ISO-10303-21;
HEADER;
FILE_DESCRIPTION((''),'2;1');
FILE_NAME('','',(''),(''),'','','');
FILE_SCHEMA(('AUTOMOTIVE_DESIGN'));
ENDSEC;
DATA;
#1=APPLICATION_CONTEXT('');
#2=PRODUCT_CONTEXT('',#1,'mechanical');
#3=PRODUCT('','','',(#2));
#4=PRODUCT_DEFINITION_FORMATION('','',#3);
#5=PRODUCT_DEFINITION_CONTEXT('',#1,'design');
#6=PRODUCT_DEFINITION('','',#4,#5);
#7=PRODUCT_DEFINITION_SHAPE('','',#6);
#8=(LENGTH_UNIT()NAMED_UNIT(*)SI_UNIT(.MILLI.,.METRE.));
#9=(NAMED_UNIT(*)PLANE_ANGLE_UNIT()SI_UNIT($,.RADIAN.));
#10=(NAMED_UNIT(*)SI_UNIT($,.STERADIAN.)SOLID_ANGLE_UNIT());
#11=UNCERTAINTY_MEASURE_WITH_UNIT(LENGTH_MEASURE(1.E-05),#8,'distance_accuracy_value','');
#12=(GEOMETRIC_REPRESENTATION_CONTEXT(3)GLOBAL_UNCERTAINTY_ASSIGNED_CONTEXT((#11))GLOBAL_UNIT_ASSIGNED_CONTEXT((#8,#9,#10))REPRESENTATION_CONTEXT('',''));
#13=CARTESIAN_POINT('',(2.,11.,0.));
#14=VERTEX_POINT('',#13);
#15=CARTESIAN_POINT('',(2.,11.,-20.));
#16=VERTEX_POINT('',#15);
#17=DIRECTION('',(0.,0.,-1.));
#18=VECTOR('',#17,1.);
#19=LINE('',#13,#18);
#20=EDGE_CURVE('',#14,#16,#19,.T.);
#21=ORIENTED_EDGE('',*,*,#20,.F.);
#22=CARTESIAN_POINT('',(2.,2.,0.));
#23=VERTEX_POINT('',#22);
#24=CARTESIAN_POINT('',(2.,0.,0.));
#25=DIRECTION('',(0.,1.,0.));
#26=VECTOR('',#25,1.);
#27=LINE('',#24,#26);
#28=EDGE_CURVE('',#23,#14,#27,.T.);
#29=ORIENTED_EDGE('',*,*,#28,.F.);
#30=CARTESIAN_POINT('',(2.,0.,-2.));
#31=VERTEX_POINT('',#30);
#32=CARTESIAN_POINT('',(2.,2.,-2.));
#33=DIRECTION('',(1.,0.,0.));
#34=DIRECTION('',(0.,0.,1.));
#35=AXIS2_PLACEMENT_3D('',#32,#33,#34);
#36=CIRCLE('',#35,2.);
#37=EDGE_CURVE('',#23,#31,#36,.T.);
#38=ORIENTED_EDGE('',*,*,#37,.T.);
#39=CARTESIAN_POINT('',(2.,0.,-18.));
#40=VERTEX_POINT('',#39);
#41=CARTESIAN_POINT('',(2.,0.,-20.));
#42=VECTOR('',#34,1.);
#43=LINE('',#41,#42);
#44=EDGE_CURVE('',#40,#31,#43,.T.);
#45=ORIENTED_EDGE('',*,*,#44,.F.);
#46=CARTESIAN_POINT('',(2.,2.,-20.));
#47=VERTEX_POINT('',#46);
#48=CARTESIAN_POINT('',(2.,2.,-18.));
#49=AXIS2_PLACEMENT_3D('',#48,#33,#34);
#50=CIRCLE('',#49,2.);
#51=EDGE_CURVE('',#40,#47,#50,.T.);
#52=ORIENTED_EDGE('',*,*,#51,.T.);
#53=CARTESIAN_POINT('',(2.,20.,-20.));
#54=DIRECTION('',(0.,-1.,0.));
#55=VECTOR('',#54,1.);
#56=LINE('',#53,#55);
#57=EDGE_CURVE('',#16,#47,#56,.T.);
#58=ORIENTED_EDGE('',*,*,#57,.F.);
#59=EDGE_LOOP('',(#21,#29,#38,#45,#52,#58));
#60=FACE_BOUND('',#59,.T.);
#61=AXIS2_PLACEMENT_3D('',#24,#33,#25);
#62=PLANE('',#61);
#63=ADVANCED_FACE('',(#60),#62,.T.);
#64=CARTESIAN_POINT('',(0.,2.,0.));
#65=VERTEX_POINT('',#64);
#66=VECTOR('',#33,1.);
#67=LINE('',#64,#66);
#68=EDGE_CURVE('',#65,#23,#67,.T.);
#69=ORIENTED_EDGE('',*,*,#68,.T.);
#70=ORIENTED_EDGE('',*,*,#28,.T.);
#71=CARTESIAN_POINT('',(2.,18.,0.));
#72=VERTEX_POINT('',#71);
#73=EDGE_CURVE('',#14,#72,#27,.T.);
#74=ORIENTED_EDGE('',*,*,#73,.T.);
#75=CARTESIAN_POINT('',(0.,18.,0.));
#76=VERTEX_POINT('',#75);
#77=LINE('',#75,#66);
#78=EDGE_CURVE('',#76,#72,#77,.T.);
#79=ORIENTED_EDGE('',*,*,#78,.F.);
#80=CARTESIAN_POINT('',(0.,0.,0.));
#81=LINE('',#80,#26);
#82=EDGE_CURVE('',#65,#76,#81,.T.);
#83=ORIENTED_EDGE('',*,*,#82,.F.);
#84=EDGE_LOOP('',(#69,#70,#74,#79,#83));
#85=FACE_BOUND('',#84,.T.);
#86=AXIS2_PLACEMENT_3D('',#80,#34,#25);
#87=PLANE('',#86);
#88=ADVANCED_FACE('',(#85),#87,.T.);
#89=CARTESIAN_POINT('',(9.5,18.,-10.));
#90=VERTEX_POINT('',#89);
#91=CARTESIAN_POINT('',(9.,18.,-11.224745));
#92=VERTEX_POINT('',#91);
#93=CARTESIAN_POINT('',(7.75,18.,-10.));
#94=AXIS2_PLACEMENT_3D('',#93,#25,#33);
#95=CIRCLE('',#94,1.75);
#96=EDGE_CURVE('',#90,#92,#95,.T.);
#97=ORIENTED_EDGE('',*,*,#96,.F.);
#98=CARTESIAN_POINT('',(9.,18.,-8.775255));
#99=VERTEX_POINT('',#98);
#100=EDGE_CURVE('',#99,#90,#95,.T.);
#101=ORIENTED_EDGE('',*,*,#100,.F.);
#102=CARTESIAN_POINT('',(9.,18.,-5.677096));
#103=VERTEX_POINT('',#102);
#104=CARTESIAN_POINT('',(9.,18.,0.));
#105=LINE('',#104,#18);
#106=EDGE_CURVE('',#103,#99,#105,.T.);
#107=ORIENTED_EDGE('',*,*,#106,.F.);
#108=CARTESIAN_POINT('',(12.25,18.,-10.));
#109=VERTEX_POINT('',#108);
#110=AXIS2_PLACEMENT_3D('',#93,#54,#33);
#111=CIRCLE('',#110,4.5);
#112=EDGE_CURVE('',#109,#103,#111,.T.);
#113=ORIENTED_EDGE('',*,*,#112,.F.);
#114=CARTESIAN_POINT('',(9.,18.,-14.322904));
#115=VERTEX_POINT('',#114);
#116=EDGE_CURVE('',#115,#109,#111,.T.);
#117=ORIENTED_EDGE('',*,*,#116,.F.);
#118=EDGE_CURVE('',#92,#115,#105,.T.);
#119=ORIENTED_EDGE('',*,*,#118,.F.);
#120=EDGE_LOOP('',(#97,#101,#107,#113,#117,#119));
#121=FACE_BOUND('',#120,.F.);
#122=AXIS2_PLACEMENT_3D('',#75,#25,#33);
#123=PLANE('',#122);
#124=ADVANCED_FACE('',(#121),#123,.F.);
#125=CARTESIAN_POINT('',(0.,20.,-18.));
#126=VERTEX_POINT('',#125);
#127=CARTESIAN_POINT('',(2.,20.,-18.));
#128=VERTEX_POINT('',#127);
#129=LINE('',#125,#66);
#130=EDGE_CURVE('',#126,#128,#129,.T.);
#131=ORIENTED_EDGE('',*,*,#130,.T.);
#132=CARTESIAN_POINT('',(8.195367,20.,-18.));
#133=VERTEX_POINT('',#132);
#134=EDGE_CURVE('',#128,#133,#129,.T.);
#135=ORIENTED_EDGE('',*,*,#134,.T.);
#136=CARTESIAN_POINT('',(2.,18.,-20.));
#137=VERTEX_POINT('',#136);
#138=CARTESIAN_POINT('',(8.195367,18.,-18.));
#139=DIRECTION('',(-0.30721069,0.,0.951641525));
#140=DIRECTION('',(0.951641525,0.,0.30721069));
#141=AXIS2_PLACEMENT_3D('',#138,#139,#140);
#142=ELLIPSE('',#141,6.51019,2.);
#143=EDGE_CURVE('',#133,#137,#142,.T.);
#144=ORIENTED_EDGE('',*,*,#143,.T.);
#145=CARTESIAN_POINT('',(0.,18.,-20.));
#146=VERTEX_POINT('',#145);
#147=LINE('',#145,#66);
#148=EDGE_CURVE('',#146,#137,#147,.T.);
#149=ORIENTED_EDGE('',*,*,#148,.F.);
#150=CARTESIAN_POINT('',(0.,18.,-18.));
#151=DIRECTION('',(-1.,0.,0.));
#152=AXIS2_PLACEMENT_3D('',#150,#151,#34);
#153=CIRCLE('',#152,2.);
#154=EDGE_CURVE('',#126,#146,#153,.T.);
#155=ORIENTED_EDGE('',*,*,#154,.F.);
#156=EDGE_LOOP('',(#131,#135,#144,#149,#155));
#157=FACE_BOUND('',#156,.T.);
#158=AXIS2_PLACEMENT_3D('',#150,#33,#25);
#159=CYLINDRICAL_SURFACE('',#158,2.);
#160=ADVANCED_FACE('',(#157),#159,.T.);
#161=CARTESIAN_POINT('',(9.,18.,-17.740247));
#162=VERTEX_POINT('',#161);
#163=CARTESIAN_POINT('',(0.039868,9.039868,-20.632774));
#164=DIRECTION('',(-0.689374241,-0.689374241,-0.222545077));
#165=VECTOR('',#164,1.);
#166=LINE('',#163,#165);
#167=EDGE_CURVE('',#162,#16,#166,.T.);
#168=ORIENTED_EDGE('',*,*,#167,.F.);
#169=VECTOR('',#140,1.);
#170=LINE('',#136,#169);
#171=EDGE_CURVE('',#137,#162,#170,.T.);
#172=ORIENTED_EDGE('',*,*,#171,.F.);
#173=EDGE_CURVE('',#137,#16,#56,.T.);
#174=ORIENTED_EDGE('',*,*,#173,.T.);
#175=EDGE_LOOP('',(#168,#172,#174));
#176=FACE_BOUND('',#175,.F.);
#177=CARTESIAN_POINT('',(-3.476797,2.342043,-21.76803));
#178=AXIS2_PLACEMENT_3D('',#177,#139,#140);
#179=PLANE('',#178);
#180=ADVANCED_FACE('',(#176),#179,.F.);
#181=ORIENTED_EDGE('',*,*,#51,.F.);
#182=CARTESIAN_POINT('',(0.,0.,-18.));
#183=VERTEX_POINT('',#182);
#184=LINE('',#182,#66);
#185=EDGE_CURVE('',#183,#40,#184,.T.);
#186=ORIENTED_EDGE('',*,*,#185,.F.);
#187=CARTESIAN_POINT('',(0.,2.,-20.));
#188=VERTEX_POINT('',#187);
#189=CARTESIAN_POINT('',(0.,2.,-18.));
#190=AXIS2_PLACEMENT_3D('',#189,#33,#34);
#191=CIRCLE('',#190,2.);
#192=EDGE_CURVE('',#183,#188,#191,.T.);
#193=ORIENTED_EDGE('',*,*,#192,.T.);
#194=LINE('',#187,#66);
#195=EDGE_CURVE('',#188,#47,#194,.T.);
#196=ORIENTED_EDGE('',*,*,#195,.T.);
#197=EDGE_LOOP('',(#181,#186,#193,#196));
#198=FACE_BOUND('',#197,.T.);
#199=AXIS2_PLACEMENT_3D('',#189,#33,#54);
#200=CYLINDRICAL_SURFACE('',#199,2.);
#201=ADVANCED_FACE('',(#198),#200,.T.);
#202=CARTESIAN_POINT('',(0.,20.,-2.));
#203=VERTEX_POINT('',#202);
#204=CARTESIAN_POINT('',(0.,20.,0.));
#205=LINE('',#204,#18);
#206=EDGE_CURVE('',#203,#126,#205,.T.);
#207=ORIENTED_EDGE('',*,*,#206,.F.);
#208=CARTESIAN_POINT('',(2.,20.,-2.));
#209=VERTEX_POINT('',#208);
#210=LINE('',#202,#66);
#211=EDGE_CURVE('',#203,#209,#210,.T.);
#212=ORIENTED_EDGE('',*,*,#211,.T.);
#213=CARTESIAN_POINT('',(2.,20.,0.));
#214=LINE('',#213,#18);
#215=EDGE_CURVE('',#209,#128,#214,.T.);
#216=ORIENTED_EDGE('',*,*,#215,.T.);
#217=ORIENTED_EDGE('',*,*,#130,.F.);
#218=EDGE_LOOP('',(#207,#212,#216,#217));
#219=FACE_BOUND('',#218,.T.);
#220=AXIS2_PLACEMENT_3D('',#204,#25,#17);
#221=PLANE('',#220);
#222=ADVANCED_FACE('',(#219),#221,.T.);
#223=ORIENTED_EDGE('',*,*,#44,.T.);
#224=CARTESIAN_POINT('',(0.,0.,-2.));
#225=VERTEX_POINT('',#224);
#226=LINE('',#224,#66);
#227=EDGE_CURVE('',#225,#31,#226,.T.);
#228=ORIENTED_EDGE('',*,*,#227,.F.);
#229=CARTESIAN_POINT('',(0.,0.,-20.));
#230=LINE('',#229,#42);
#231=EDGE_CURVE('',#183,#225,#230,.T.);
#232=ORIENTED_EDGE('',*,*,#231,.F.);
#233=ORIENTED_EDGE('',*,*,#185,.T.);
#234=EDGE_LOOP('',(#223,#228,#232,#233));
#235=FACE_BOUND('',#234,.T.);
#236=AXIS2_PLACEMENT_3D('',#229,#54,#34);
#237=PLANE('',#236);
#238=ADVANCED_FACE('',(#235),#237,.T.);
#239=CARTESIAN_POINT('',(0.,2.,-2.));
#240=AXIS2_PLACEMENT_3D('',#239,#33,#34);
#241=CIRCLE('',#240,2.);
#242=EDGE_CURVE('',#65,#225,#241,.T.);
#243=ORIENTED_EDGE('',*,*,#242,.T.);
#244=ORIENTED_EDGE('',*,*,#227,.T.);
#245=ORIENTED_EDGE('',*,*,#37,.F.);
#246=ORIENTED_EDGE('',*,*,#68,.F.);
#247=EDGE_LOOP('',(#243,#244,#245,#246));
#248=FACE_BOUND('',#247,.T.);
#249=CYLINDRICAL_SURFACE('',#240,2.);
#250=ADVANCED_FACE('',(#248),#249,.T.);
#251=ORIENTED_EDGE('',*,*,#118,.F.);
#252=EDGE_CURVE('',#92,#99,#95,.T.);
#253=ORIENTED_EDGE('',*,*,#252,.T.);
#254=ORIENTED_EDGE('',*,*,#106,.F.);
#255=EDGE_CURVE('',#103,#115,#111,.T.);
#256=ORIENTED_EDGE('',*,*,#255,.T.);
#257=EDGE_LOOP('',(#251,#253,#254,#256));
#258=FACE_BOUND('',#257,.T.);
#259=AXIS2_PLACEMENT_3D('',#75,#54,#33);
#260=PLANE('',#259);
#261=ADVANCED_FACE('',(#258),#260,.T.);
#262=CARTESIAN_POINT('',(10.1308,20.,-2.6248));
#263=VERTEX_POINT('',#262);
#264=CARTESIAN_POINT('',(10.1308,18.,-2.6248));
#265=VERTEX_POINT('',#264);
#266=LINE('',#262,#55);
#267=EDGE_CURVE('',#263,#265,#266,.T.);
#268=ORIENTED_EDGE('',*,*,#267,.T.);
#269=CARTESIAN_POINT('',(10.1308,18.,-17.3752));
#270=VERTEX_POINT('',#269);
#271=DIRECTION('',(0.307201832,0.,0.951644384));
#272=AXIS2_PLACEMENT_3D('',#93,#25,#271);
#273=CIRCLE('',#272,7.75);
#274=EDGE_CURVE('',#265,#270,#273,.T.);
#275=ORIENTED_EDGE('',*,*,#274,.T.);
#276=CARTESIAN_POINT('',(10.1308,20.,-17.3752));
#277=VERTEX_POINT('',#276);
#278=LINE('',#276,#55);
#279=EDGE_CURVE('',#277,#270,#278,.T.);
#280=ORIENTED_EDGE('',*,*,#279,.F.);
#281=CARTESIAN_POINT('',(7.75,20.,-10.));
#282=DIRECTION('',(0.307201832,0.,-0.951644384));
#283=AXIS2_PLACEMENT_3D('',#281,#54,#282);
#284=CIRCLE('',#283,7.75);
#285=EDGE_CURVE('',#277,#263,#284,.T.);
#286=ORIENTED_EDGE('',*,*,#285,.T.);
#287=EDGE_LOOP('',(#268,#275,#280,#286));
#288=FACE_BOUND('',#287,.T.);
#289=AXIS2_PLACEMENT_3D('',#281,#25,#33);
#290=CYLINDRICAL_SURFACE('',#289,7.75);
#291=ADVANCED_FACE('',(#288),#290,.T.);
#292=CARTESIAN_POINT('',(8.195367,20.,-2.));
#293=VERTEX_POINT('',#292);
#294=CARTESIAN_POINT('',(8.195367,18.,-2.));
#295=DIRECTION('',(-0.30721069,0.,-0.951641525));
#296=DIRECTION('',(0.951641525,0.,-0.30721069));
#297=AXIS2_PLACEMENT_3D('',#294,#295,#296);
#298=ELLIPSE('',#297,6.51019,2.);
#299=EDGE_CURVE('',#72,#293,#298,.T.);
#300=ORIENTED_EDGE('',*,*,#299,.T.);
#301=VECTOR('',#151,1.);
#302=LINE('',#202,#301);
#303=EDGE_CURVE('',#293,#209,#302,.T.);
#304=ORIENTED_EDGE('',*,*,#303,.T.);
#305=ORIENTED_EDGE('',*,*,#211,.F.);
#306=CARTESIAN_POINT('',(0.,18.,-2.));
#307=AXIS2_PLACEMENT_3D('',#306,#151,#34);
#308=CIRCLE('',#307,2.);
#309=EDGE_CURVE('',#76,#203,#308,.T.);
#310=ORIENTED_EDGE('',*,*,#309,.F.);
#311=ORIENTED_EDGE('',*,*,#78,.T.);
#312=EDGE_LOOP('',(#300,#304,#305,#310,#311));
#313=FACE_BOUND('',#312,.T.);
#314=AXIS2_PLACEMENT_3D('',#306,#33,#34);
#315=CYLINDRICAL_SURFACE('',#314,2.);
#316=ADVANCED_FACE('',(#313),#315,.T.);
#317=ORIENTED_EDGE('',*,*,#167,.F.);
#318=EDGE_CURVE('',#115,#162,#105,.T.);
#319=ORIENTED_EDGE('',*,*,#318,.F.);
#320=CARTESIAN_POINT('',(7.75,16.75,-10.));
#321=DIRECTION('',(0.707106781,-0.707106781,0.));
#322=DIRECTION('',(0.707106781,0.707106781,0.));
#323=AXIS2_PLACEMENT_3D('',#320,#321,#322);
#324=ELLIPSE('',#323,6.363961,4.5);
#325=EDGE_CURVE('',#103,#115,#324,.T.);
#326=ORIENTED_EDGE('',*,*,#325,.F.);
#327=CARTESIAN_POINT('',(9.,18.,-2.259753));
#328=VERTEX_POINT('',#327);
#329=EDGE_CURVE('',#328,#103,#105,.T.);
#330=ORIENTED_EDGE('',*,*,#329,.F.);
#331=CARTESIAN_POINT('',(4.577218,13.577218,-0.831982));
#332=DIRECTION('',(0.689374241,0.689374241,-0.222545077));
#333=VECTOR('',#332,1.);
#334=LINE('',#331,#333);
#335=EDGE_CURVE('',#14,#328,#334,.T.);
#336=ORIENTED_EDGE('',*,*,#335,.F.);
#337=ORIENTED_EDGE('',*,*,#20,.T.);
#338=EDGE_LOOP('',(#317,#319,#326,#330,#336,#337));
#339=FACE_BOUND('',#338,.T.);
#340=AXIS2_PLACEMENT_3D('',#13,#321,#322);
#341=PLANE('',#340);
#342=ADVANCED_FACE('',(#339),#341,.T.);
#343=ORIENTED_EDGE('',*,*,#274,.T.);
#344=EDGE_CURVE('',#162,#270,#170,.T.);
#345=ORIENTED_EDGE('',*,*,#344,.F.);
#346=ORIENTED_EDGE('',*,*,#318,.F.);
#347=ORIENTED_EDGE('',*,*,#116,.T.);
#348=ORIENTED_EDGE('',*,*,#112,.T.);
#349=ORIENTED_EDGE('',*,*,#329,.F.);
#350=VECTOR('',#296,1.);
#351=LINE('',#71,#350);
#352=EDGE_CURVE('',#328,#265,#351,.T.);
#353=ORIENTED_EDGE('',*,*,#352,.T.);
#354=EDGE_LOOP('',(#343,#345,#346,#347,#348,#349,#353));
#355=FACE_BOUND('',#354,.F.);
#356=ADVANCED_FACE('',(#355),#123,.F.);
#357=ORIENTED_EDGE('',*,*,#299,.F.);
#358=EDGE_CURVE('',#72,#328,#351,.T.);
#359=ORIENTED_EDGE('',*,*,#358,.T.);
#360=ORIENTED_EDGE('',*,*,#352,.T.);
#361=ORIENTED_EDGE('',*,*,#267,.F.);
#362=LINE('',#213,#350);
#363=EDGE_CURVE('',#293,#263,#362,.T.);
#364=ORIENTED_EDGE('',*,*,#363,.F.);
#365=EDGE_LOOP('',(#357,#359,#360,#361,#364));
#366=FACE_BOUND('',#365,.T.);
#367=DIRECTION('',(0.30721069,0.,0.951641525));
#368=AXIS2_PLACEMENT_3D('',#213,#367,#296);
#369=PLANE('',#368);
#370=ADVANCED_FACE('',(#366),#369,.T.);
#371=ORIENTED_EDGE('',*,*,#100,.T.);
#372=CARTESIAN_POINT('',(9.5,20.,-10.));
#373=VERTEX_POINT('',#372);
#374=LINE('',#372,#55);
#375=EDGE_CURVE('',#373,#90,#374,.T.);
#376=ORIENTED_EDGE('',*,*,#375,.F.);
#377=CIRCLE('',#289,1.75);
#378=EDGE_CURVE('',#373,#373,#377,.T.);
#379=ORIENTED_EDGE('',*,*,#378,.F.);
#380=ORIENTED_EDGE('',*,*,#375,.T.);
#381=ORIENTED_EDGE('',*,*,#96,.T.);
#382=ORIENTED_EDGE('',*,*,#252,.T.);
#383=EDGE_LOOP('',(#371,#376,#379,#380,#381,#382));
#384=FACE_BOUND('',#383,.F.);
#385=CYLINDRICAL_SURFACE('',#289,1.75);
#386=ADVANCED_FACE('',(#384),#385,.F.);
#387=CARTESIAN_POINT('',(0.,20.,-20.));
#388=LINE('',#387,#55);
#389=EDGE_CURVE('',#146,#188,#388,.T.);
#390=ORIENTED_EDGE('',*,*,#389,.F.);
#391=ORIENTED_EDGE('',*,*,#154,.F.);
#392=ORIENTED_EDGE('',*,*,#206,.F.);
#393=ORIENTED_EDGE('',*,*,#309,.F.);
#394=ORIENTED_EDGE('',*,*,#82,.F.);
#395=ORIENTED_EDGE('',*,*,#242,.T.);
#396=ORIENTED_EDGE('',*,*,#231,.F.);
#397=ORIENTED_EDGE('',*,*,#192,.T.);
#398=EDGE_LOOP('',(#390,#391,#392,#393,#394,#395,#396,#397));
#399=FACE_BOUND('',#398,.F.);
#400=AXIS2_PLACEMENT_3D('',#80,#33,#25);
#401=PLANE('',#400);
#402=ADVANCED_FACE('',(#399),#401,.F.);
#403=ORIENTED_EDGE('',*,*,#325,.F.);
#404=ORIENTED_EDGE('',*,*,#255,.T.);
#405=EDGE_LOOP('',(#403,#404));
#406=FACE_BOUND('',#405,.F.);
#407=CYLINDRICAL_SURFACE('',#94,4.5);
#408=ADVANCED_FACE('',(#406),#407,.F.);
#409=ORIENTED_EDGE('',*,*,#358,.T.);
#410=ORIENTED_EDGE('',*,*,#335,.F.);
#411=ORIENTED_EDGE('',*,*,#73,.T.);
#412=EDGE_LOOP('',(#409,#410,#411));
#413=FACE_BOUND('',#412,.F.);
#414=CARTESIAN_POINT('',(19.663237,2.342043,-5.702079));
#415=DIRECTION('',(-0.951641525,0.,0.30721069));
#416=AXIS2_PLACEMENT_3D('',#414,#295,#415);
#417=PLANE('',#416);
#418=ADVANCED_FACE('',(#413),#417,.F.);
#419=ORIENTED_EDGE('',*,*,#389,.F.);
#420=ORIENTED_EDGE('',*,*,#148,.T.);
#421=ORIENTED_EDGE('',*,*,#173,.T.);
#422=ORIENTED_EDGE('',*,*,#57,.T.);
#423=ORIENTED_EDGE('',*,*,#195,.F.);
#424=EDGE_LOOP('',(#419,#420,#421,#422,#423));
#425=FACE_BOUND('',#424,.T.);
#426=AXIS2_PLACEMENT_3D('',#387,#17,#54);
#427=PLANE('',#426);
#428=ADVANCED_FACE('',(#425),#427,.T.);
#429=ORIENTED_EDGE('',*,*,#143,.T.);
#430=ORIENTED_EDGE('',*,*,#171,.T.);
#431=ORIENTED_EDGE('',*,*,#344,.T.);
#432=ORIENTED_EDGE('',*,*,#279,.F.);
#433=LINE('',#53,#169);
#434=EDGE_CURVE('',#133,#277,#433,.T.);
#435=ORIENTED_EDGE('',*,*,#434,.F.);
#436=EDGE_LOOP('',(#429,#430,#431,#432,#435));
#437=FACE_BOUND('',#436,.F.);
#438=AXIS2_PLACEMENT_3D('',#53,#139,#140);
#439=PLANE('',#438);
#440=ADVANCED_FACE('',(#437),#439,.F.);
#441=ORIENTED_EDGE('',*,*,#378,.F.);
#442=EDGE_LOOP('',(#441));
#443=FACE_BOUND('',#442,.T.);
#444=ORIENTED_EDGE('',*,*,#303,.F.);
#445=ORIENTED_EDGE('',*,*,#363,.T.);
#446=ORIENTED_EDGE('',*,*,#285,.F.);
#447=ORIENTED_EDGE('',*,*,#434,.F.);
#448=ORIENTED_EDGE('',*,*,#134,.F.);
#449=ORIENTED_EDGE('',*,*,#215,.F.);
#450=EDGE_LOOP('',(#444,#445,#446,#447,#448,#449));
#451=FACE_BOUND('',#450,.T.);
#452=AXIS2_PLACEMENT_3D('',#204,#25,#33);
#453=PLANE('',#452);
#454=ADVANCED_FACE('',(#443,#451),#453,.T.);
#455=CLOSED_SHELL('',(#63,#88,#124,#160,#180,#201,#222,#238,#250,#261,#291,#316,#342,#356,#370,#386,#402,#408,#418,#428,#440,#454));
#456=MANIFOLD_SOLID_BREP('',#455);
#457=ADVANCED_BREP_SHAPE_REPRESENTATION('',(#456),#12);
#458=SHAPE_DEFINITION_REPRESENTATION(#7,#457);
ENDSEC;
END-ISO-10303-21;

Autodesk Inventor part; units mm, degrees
ref_plane "YZ Plane" through (0, 0, 0) normal (1, 0, 0) x (0, 1, 0)
ref_plane "XZ Plane" through (0, 0, 0) normal (0, 1, 0) x (-1, 0, 0)
ref_plane "XY Plane" through (0, 0, 0) normal (0, 0, 1) x (1, 0, 0)
sketch "Sketch1" plane through (0, 0, 0) normal (1, 0, 0) x (0, 1, 0)
  line L0 (0, 0) -> (20, 0)
  line L1 (20, 0) -> (20, -20)
  line L2 (20, -20) -> (0, -20)
  line L3 (0, -20) -> (0, 0)
  dimension "d0" = 20
  dimension "d1" = 20
extrude "Extrusion1" add sketch "Sketch1" along normal blind 2
sketch "Sketch3" plane through (0, 20, 0) normal (0, 1, 0) x (1, 0, 0)
  circle A0 centre (7.75, 10) radius 7.75
  line L0 (2, 20) -> (2, 0) projected
  line L1 (2, 0) -> (10.1308, 2.6248)
  line L2 (2, 20) -> (10.1308, 17.3752)
  circle A1 centre (7.75, 10) radius 1.75
  line L3 (0, 20) -> (0, 0) projected
  dimension "d11" = 15.5
  dimension "d12" = 3.5
extrude "Extrusion3" add sketch "Sketch3" against normal blind 2 contours A0 L0 | A0 L0 L2 | L1 L0 A0 picked at (3.3333, 10)
chamfer "Chamfer3" distance 7 angle 45 1 edges at (2, 18, -10)
fillet "Fillet1" radius 2 4 edges at (1, 20, 0) (1, 0, 0) (1, 20, -20) (1, 0, -20)
sketch "Sketch4" plane through (0, 18, 0) normal (0, -1, 0) x (1, 0, 0)
  arc A0 (9, -11.2247) -> (9, -8.7753) centre (7.75, -10) ccw projected
  circle A1 centre (7.75, -10) radius 4.5
  point P0 (0, 0)
  dimension "d22" = 9
extrude "Extrusion4" cut sketch "Sketch4" along normal blind 6
properties part number "ChargingArm - FlatPlateBracket" material "ABS Plastic"
